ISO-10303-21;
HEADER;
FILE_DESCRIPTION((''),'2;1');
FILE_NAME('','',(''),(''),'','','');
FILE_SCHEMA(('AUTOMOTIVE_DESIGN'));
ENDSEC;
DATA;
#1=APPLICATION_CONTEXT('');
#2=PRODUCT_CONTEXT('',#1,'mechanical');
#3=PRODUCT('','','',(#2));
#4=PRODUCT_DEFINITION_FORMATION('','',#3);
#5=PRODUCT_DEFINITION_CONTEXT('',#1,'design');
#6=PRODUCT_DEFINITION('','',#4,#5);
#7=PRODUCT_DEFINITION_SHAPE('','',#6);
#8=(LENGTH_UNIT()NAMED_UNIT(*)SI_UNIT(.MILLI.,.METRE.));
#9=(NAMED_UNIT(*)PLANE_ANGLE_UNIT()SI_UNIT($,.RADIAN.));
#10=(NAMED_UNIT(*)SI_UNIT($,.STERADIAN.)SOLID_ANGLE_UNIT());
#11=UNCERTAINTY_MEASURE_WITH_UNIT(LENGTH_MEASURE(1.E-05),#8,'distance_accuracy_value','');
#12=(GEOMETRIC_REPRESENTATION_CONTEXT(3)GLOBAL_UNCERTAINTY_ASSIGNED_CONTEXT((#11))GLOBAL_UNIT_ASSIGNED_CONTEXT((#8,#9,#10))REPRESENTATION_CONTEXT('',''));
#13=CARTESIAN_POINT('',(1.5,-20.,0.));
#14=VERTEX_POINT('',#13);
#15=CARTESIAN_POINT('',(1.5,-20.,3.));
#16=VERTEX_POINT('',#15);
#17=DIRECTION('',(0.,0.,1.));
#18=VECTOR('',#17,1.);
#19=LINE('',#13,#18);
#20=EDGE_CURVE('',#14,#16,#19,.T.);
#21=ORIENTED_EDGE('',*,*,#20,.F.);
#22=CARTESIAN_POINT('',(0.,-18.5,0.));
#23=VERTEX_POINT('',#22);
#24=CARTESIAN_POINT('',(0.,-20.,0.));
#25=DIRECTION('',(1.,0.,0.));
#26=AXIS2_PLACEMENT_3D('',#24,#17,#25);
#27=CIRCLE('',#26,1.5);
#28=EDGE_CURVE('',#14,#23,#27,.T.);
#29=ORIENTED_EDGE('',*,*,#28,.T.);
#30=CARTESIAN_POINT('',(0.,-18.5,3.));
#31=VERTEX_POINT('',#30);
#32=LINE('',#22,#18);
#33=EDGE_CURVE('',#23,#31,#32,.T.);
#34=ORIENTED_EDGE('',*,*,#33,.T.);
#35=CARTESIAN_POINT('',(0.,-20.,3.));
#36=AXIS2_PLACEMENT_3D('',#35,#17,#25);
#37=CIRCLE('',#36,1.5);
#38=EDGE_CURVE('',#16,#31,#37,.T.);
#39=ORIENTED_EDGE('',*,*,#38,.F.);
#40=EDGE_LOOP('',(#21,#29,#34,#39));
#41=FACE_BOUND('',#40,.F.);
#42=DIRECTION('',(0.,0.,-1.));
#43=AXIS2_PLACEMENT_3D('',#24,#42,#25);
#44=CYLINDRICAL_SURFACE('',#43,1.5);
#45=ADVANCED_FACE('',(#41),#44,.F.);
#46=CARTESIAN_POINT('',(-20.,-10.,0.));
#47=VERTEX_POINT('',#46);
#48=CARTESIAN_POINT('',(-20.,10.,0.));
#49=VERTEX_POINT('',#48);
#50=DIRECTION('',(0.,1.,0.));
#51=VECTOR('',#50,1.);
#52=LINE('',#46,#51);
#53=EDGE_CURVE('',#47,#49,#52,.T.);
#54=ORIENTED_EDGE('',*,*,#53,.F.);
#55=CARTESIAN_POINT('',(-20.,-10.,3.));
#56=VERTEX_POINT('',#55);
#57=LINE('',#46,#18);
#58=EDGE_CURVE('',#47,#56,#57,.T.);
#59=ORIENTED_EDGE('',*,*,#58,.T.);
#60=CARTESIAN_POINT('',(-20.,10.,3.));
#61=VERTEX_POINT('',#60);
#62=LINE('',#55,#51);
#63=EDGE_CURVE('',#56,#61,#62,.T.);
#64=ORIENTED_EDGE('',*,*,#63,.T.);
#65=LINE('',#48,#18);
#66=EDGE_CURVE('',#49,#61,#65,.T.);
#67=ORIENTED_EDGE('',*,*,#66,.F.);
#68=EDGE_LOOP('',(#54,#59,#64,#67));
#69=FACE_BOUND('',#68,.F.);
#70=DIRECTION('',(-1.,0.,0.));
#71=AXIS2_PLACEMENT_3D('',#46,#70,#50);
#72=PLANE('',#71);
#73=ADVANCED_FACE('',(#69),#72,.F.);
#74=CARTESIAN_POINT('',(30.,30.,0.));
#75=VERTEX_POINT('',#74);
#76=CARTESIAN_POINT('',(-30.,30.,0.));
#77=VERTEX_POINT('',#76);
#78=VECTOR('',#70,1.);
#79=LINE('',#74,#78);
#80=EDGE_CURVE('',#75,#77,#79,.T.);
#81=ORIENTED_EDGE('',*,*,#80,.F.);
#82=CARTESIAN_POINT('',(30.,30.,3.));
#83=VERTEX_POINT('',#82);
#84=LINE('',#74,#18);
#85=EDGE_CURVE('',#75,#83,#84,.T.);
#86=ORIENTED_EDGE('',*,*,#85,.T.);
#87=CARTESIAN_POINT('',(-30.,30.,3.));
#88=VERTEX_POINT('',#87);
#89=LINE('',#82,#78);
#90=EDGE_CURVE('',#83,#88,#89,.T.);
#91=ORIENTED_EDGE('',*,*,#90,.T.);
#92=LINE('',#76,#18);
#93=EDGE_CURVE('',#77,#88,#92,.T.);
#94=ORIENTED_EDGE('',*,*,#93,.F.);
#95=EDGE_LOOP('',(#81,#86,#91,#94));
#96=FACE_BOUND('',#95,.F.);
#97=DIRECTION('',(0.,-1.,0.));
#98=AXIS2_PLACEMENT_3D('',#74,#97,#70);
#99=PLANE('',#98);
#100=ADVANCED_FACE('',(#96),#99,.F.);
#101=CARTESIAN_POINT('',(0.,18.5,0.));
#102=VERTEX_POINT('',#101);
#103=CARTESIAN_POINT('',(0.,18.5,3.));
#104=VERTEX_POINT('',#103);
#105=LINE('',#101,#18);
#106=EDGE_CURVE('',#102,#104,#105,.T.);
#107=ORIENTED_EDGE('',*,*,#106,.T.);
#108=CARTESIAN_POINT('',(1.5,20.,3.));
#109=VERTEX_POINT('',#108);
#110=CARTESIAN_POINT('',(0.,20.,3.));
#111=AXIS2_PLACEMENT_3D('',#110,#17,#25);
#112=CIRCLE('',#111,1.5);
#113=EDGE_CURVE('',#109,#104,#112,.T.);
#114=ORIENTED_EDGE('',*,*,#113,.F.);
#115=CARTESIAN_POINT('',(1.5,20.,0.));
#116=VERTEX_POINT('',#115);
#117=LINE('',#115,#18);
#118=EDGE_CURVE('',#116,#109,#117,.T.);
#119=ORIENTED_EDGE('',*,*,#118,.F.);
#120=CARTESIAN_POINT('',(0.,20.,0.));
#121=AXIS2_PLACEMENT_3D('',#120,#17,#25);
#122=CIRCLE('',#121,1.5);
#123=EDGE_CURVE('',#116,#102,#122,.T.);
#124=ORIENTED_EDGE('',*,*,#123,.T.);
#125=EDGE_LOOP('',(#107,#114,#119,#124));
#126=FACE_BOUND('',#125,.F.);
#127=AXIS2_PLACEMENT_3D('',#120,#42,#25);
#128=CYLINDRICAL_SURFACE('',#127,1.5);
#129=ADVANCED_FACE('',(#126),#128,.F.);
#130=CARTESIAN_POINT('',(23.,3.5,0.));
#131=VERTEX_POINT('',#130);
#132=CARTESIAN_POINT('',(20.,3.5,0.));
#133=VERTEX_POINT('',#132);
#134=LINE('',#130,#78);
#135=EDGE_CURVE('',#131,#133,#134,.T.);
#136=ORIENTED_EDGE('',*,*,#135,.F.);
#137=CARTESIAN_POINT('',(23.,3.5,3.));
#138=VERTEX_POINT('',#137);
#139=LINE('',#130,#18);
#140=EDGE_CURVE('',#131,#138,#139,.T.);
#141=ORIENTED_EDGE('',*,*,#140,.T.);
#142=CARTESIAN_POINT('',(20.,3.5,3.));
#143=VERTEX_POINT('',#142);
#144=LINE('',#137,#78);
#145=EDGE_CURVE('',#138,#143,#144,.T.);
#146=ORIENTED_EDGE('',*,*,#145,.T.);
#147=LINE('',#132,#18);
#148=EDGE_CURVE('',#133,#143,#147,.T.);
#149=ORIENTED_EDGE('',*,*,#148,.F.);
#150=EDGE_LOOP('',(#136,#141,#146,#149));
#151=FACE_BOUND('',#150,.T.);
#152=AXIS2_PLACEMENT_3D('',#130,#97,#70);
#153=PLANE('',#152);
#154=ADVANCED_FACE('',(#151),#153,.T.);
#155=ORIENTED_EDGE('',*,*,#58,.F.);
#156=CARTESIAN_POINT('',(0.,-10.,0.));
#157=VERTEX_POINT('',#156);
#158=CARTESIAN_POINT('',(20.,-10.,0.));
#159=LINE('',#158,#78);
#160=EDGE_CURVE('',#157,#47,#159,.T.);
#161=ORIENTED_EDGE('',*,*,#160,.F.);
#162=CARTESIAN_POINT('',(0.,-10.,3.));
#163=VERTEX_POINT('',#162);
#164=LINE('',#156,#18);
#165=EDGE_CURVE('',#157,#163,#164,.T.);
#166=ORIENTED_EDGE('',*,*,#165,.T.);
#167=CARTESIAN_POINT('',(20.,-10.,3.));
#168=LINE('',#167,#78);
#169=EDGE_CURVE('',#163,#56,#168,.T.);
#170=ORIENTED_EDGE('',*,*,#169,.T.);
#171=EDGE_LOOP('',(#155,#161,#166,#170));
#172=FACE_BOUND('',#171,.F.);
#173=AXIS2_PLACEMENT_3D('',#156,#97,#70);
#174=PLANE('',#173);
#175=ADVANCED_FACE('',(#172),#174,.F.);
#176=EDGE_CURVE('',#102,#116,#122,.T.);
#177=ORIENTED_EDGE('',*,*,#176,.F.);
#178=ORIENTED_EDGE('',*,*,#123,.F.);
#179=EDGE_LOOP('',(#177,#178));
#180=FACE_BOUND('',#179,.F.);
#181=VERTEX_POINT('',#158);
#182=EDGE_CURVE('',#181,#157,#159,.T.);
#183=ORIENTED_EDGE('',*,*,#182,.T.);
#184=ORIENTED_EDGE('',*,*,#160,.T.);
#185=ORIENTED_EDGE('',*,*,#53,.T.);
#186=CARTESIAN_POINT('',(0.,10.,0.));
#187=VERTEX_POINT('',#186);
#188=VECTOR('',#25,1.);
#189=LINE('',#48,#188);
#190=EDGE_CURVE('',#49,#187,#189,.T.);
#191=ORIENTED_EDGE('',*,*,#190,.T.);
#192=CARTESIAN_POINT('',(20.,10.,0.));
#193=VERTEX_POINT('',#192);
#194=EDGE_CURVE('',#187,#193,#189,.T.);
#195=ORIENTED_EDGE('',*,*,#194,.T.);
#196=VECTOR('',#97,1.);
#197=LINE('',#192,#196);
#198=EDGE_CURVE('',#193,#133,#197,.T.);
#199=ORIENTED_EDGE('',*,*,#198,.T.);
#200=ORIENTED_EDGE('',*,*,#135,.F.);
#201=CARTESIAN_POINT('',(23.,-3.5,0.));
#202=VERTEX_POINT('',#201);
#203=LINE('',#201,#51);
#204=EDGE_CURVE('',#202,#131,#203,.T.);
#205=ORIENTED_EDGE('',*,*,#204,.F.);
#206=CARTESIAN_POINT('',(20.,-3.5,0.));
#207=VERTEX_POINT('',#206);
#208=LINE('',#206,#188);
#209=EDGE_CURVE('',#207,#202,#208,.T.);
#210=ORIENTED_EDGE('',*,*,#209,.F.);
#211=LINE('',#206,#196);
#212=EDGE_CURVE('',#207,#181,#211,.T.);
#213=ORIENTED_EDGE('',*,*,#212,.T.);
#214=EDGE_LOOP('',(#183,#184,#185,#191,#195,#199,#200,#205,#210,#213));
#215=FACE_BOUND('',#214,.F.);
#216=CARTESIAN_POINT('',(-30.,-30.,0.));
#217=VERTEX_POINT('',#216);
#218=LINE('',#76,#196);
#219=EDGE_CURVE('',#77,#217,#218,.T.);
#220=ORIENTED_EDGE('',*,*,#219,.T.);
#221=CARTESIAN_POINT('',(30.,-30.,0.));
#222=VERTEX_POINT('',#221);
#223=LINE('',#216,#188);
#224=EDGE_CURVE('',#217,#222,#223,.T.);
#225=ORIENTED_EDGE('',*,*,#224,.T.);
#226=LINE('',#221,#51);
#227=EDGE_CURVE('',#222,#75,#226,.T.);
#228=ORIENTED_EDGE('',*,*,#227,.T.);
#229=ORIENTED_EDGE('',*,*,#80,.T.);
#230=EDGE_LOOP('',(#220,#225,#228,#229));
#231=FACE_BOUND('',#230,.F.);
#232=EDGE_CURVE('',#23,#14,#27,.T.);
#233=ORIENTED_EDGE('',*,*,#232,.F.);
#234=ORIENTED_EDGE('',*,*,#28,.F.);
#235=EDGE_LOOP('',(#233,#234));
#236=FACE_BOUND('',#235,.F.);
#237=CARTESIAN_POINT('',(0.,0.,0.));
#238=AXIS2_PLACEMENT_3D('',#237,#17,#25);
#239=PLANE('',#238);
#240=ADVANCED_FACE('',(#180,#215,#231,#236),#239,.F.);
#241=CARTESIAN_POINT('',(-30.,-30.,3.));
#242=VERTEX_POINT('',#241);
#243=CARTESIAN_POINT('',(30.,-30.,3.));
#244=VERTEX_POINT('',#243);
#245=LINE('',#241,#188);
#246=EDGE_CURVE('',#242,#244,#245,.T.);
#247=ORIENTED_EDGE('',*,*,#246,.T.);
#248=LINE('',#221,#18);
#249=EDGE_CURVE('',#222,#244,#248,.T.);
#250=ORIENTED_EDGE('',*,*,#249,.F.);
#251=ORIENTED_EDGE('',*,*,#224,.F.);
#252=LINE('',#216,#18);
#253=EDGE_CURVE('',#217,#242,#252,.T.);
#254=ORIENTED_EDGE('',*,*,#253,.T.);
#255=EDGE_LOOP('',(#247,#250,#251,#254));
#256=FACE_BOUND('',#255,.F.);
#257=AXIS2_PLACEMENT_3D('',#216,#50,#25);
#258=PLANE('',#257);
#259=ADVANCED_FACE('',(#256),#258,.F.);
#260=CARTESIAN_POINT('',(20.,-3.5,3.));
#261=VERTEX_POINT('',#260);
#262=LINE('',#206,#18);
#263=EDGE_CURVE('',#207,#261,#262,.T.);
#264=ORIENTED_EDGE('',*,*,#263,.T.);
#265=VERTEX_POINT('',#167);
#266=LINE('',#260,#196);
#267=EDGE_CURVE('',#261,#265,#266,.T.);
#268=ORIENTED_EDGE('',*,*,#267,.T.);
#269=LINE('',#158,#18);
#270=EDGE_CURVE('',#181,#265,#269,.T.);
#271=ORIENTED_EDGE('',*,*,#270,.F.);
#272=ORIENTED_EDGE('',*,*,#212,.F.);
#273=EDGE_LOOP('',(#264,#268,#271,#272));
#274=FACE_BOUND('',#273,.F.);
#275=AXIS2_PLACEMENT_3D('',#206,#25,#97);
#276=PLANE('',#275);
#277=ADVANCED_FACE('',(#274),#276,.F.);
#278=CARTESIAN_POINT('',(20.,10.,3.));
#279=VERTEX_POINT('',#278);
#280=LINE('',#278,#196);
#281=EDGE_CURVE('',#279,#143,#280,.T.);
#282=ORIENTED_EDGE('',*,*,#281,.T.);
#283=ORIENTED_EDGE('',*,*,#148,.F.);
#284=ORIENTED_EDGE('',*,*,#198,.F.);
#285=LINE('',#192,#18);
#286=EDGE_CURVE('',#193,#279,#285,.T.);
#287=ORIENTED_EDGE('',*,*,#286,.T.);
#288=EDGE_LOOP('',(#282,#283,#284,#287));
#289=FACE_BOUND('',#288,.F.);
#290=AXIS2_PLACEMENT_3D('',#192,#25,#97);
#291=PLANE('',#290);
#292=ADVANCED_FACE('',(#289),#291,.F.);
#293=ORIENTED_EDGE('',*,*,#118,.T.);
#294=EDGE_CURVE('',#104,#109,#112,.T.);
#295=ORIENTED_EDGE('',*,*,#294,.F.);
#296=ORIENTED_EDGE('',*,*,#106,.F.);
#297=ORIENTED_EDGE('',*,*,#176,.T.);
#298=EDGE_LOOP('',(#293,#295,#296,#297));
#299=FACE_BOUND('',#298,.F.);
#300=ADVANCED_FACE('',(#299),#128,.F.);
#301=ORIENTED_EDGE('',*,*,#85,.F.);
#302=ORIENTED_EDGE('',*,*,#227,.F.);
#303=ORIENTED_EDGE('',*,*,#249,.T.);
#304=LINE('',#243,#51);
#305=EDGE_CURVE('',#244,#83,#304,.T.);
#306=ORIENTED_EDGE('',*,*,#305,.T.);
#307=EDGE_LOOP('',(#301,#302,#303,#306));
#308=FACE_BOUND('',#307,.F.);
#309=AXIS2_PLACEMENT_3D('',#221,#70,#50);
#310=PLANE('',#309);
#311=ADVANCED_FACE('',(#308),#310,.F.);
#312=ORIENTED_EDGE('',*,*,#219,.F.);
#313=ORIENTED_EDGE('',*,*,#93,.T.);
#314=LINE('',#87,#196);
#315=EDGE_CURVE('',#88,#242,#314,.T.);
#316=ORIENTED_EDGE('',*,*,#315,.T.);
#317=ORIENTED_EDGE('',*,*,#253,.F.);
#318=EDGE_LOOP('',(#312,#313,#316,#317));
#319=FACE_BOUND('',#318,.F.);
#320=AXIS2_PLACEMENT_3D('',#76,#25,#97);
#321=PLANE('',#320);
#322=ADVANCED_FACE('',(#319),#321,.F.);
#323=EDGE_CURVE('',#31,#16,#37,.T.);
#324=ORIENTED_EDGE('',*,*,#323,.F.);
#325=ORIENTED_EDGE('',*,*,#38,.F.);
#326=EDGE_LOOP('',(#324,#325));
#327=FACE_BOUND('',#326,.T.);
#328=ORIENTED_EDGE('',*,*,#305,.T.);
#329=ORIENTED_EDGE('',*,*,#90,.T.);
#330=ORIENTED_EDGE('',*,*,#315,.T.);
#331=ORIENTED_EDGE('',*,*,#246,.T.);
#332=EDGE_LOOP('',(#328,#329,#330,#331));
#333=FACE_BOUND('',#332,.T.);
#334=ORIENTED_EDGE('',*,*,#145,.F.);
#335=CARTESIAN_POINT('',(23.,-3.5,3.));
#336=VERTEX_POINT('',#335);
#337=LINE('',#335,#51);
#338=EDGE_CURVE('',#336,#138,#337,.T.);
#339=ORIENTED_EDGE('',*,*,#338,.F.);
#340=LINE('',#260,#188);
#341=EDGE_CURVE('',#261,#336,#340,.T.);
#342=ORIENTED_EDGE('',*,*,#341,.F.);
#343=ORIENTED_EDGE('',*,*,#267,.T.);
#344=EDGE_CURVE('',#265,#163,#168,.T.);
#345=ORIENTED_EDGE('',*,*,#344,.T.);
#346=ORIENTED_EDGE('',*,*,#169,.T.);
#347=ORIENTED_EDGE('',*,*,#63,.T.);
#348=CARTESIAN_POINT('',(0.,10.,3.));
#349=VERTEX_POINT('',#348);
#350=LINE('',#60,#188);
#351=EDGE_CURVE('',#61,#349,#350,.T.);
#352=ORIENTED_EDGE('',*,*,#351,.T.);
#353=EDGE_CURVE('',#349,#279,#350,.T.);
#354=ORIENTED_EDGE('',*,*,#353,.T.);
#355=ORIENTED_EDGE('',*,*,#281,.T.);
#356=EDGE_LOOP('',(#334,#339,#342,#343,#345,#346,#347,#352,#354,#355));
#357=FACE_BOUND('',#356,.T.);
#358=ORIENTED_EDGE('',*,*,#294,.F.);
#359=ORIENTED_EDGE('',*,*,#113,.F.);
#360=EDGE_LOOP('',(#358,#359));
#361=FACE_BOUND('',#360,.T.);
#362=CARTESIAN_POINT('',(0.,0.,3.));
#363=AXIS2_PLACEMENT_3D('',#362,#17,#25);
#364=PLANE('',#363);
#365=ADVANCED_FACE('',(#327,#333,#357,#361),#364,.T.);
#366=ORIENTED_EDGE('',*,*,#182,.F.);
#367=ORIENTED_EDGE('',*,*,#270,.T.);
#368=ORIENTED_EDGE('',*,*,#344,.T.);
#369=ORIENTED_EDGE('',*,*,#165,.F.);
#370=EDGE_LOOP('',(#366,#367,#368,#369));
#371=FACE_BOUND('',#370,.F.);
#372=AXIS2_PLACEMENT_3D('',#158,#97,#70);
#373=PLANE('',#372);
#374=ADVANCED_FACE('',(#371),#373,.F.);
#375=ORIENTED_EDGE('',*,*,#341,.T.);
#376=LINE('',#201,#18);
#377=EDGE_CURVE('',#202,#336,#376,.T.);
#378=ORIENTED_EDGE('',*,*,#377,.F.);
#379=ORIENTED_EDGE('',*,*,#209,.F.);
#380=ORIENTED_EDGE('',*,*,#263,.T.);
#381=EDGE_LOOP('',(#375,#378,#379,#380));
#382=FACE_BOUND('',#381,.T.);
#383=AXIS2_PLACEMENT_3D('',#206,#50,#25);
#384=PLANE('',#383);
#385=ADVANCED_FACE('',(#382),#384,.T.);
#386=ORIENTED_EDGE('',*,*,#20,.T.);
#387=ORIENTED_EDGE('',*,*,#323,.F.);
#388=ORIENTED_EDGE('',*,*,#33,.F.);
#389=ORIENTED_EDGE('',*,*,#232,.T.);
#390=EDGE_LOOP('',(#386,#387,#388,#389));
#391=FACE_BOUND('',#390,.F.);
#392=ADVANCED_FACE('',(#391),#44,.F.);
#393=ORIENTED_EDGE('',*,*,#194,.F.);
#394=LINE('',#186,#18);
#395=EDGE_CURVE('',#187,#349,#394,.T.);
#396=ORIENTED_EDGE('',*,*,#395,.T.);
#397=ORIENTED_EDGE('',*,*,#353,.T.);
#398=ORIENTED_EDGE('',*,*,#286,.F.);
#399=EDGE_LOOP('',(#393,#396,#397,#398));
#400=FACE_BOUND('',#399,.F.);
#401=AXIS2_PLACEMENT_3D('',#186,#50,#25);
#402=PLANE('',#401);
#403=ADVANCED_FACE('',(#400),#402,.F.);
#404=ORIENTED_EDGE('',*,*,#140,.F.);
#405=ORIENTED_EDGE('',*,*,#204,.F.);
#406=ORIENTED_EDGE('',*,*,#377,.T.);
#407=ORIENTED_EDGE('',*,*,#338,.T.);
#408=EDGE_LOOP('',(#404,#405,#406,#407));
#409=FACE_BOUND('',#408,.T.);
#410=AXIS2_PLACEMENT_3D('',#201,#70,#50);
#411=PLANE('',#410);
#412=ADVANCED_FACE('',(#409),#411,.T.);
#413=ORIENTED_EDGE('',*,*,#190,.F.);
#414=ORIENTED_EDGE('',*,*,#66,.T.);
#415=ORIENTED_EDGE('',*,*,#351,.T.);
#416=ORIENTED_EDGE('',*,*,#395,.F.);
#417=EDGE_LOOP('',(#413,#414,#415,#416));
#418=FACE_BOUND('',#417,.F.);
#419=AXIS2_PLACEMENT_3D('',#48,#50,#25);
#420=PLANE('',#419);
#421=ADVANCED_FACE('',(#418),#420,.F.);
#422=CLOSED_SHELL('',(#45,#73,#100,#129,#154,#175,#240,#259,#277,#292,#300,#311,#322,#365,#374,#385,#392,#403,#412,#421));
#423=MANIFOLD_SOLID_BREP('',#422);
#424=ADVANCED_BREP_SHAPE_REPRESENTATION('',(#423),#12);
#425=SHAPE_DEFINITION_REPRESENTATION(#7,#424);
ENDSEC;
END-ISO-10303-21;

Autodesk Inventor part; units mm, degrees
ref_plane "YZ Plane" through (0, 0, 0) normal (1, 0, 0) x (0, 1, 0)
ref_plane "XZ Plane" through (0, 0, 0) normal (0, 1, 0) x (-1, 0, 0)
ref_plane "XY Plane" through (0, 0, 0) normal (0, 0, 1) x (1, 0, 0)
sketch "Sketch1" plane through (0, 0, 0) normal (0, 0, 1) x (1, 0, 0)
  line L0 (-20, 10) -> (20, 10)
  line L1 (20, -10) -> (-20, -10)
  line L2 (-20, -10) -> (-20, 10)
  line L3 (-20, 10) -> (20, -10) construction
  line L4 (20, 10) -> (-20, -10) construction
  line L5 (-30, -30) -> (30, -30)
  line L6 (30, -30) -> (30, 30)
  line L7 (30, 30) -> (-30, 30)
  line L8 (-30, 30) -> (-30, -30)
  line L9 (-30, -30) -> (30, 30) construction
  line L10 (30, -30) -> (-30, 30) construction
  line L11 (0, 10) -> (0, 20)
  line L12 (0, -10) -> (0, -20)
  circle A0 centre (0, 20) radius 1.5
  circle A1 centre (0, -20) radius 1.5
  line L13 (20, -3.5) -> (23, -3.5)
  line L14 (23, -3.5) -> (23, 3.5)
  line L15 (23, 3.5) -> (20, 3.5)
  line L16 (20, 10) -> (20, 3.5)
  line L17 (20, -3.5) -> (20, -10)
  point P0 (0, 0)
  point P1 (20, 0)
  dimension "d0" = 40
  dimension "d1" = 20
  dimension "d2" = 60
  dimension "d3" = 60
  dimension "d4" = 10
  dimension "d5" = 10
  dimension "d6" = 3
  dimension "d7" = 3
  dimension "d11" = 7
extrude "Extrusion2" add sketch "Sketch1" along normal blind 3
properties part number "Servo Holder BOTTOM"
